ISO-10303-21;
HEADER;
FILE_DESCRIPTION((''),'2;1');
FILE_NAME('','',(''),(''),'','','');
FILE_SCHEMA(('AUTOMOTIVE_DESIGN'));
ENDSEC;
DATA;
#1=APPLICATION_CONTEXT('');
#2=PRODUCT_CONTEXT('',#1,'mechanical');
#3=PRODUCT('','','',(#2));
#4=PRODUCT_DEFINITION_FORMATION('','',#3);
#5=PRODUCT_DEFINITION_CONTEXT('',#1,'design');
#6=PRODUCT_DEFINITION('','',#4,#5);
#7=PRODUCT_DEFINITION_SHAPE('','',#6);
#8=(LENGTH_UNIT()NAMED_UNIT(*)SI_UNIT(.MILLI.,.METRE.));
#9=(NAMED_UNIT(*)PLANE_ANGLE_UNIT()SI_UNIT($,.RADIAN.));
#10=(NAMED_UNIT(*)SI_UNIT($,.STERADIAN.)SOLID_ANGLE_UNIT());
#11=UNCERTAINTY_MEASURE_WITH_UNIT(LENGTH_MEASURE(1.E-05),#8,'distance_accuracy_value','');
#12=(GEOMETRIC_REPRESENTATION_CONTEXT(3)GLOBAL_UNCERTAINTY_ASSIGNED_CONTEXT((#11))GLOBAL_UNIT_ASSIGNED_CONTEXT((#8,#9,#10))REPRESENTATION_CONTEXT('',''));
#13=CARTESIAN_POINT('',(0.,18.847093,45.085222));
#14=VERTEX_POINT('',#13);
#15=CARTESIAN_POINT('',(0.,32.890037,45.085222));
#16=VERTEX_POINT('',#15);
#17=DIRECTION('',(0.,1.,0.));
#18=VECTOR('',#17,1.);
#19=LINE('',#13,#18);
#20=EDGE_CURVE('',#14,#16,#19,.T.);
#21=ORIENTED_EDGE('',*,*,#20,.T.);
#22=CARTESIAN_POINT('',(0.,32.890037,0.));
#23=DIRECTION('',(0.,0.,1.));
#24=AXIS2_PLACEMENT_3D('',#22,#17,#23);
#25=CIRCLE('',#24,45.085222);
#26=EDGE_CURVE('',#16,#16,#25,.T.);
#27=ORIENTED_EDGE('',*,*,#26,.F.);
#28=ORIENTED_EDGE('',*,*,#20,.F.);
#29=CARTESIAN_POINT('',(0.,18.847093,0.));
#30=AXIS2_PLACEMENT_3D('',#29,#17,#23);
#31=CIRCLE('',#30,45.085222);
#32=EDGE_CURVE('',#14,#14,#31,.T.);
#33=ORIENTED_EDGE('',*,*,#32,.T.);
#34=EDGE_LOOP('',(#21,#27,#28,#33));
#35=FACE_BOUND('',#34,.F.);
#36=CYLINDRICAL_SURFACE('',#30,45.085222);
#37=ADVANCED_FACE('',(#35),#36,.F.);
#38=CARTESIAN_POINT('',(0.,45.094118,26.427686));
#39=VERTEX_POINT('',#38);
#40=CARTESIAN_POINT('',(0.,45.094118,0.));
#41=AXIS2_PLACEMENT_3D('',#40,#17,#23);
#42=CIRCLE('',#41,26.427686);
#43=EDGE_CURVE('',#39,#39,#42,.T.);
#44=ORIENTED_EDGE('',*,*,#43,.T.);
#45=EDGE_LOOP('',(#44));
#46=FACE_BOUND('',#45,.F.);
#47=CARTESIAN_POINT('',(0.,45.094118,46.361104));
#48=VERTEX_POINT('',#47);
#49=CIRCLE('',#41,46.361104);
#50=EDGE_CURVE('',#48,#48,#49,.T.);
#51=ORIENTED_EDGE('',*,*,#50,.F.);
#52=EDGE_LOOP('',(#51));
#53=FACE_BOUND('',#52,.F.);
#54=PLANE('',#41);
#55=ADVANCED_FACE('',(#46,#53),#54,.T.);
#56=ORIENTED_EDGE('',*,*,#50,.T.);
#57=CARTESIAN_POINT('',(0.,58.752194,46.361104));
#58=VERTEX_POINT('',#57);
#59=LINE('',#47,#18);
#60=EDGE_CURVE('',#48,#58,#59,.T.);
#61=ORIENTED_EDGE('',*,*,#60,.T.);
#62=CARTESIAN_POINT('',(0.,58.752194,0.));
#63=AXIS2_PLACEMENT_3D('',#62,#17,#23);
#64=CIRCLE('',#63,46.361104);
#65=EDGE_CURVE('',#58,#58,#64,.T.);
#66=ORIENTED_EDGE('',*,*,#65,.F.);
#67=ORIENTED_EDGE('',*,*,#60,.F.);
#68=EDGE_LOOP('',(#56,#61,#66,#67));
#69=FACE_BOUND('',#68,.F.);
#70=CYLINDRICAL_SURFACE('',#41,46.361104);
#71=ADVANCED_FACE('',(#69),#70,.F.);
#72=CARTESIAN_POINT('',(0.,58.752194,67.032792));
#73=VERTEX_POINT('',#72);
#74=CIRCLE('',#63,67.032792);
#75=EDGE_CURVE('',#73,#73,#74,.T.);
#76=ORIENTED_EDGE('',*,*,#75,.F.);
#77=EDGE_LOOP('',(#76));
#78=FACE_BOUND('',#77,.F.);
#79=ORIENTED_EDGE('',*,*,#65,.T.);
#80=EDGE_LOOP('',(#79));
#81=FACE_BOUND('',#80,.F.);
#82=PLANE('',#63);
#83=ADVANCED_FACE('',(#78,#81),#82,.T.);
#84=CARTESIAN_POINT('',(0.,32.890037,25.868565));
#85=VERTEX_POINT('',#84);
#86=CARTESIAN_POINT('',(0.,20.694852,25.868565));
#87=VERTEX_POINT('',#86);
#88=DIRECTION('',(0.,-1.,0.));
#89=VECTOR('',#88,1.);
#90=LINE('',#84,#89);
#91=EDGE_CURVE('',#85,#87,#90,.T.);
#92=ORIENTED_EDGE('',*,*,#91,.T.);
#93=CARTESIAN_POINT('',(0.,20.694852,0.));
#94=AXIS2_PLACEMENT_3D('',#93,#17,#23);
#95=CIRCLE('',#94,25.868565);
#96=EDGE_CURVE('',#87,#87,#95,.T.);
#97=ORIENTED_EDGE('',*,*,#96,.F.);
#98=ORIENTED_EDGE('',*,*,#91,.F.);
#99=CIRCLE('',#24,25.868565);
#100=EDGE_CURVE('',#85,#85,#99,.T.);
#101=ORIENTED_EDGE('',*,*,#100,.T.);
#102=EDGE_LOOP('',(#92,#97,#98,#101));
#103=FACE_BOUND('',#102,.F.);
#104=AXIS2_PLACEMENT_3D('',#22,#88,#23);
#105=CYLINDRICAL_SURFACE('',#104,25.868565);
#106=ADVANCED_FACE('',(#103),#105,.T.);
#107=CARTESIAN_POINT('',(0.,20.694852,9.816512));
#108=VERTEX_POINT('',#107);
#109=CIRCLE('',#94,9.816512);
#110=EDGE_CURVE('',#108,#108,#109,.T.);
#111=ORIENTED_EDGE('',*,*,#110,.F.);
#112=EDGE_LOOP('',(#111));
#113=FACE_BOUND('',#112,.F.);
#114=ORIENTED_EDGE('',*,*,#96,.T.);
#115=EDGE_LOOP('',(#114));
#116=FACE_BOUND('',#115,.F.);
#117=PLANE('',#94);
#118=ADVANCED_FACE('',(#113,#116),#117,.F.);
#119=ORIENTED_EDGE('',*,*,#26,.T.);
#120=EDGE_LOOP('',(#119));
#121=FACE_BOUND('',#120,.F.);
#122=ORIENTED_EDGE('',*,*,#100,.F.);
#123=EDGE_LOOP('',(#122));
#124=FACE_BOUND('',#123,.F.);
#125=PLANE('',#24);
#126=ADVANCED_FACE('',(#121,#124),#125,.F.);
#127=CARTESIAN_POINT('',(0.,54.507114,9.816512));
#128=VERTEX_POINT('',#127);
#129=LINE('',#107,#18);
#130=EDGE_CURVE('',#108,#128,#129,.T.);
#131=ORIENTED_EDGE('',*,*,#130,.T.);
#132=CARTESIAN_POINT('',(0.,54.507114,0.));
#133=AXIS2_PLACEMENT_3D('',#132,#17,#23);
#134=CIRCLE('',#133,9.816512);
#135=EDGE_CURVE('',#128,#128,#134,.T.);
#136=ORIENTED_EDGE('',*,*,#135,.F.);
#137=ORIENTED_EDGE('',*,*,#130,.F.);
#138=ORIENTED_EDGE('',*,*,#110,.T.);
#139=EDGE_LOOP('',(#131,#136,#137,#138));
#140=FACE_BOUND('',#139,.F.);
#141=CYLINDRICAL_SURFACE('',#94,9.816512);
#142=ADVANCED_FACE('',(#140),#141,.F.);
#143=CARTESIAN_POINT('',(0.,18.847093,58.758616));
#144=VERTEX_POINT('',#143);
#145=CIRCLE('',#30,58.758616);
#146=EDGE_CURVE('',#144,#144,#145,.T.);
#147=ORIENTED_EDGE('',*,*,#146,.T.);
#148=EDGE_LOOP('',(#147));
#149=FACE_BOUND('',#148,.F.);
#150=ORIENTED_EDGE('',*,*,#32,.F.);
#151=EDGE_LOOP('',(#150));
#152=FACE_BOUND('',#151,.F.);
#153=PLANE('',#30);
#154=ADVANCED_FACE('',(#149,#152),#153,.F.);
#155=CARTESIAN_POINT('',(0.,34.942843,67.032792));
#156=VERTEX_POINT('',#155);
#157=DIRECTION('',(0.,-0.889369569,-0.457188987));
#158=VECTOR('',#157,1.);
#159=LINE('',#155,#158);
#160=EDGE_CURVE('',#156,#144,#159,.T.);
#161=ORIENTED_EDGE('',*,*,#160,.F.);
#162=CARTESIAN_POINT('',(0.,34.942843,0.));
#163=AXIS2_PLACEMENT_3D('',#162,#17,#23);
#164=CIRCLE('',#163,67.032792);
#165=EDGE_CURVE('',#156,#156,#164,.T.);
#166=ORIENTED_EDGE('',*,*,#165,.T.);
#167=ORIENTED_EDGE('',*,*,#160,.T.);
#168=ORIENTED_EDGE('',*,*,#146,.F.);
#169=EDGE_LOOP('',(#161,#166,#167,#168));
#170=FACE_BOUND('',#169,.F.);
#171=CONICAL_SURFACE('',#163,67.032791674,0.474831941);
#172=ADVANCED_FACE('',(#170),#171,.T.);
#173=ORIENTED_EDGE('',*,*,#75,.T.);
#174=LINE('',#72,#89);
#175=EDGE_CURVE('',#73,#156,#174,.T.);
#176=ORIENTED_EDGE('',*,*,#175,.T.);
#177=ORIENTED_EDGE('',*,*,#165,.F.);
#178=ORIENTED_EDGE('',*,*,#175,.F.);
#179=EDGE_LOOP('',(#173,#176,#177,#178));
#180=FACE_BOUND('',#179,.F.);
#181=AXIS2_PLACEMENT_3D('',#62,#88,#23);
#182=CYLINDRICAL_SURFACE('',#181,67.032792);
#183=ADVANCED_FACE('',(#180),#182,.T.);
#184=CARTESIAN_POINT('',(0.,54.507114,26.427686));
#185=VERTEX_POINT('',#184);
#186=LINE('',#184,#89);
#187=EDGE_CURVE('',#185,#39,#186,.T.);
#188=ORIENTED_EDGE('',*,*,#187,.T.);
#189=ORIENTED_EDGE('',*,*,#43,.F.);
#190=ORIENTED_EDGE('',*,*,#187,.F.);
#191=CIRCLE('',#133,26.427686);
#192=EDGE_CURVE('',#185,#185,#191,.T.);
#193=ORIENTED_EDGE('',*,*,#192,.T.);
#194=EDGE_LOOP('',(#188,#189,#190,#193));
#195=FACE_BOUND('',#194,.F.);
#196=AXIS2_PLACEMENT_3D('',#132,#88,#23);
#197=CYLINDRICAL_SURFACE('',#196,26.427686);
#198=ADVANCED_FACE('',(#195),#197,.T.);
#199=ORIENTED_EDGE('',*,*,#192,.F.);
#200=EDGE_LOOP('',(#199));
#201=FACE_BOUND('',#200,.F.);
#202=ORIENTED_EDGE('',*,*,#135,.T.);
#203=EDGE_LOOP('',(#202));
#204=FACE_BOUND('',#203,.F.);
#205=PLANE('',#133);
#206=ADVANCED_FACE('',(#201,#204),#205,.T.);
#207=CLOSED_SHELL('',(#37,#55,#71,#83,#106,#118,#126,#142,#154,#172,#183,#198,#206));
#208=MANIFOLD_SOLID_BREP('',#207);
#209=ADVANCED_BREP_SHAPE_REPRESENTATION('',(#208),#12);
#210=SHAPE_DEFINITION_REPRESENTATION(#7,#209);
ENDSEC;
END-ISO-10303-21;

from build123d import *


# Not quite as in the source:
# - a feature of the source that left no trace in its solid (it failed there, or was rolled back) is left out


with BuildPart() as f1:
    # F0 (on Right) → F1 (revolve)
    with BuildSketch(Plane.YZ):
        Polygon((34.94284302, 67.0327916741), (18.8470929861, 58.7586164474), (18.8470929861, 45.085221529), (32.8900367022, 45.085221529), (32.8900367022, 25.8685648441), (20.6948518753, 25.8685648441), (20.6948518753, 9.8165124655), (54.5071139932, 9.8165124655), (54.5071139932, 26.4276862144), (45.0941175222, 26.4276862144), (45.0941175222, 46.3611036539), (58.752194047, 46.3611036539), (58.752194047, 67.0327916741), align=None)
    revolve(axis=Axis((0, 36.2159982324, 0), (0, 1, 0)))


solid = f1.part
